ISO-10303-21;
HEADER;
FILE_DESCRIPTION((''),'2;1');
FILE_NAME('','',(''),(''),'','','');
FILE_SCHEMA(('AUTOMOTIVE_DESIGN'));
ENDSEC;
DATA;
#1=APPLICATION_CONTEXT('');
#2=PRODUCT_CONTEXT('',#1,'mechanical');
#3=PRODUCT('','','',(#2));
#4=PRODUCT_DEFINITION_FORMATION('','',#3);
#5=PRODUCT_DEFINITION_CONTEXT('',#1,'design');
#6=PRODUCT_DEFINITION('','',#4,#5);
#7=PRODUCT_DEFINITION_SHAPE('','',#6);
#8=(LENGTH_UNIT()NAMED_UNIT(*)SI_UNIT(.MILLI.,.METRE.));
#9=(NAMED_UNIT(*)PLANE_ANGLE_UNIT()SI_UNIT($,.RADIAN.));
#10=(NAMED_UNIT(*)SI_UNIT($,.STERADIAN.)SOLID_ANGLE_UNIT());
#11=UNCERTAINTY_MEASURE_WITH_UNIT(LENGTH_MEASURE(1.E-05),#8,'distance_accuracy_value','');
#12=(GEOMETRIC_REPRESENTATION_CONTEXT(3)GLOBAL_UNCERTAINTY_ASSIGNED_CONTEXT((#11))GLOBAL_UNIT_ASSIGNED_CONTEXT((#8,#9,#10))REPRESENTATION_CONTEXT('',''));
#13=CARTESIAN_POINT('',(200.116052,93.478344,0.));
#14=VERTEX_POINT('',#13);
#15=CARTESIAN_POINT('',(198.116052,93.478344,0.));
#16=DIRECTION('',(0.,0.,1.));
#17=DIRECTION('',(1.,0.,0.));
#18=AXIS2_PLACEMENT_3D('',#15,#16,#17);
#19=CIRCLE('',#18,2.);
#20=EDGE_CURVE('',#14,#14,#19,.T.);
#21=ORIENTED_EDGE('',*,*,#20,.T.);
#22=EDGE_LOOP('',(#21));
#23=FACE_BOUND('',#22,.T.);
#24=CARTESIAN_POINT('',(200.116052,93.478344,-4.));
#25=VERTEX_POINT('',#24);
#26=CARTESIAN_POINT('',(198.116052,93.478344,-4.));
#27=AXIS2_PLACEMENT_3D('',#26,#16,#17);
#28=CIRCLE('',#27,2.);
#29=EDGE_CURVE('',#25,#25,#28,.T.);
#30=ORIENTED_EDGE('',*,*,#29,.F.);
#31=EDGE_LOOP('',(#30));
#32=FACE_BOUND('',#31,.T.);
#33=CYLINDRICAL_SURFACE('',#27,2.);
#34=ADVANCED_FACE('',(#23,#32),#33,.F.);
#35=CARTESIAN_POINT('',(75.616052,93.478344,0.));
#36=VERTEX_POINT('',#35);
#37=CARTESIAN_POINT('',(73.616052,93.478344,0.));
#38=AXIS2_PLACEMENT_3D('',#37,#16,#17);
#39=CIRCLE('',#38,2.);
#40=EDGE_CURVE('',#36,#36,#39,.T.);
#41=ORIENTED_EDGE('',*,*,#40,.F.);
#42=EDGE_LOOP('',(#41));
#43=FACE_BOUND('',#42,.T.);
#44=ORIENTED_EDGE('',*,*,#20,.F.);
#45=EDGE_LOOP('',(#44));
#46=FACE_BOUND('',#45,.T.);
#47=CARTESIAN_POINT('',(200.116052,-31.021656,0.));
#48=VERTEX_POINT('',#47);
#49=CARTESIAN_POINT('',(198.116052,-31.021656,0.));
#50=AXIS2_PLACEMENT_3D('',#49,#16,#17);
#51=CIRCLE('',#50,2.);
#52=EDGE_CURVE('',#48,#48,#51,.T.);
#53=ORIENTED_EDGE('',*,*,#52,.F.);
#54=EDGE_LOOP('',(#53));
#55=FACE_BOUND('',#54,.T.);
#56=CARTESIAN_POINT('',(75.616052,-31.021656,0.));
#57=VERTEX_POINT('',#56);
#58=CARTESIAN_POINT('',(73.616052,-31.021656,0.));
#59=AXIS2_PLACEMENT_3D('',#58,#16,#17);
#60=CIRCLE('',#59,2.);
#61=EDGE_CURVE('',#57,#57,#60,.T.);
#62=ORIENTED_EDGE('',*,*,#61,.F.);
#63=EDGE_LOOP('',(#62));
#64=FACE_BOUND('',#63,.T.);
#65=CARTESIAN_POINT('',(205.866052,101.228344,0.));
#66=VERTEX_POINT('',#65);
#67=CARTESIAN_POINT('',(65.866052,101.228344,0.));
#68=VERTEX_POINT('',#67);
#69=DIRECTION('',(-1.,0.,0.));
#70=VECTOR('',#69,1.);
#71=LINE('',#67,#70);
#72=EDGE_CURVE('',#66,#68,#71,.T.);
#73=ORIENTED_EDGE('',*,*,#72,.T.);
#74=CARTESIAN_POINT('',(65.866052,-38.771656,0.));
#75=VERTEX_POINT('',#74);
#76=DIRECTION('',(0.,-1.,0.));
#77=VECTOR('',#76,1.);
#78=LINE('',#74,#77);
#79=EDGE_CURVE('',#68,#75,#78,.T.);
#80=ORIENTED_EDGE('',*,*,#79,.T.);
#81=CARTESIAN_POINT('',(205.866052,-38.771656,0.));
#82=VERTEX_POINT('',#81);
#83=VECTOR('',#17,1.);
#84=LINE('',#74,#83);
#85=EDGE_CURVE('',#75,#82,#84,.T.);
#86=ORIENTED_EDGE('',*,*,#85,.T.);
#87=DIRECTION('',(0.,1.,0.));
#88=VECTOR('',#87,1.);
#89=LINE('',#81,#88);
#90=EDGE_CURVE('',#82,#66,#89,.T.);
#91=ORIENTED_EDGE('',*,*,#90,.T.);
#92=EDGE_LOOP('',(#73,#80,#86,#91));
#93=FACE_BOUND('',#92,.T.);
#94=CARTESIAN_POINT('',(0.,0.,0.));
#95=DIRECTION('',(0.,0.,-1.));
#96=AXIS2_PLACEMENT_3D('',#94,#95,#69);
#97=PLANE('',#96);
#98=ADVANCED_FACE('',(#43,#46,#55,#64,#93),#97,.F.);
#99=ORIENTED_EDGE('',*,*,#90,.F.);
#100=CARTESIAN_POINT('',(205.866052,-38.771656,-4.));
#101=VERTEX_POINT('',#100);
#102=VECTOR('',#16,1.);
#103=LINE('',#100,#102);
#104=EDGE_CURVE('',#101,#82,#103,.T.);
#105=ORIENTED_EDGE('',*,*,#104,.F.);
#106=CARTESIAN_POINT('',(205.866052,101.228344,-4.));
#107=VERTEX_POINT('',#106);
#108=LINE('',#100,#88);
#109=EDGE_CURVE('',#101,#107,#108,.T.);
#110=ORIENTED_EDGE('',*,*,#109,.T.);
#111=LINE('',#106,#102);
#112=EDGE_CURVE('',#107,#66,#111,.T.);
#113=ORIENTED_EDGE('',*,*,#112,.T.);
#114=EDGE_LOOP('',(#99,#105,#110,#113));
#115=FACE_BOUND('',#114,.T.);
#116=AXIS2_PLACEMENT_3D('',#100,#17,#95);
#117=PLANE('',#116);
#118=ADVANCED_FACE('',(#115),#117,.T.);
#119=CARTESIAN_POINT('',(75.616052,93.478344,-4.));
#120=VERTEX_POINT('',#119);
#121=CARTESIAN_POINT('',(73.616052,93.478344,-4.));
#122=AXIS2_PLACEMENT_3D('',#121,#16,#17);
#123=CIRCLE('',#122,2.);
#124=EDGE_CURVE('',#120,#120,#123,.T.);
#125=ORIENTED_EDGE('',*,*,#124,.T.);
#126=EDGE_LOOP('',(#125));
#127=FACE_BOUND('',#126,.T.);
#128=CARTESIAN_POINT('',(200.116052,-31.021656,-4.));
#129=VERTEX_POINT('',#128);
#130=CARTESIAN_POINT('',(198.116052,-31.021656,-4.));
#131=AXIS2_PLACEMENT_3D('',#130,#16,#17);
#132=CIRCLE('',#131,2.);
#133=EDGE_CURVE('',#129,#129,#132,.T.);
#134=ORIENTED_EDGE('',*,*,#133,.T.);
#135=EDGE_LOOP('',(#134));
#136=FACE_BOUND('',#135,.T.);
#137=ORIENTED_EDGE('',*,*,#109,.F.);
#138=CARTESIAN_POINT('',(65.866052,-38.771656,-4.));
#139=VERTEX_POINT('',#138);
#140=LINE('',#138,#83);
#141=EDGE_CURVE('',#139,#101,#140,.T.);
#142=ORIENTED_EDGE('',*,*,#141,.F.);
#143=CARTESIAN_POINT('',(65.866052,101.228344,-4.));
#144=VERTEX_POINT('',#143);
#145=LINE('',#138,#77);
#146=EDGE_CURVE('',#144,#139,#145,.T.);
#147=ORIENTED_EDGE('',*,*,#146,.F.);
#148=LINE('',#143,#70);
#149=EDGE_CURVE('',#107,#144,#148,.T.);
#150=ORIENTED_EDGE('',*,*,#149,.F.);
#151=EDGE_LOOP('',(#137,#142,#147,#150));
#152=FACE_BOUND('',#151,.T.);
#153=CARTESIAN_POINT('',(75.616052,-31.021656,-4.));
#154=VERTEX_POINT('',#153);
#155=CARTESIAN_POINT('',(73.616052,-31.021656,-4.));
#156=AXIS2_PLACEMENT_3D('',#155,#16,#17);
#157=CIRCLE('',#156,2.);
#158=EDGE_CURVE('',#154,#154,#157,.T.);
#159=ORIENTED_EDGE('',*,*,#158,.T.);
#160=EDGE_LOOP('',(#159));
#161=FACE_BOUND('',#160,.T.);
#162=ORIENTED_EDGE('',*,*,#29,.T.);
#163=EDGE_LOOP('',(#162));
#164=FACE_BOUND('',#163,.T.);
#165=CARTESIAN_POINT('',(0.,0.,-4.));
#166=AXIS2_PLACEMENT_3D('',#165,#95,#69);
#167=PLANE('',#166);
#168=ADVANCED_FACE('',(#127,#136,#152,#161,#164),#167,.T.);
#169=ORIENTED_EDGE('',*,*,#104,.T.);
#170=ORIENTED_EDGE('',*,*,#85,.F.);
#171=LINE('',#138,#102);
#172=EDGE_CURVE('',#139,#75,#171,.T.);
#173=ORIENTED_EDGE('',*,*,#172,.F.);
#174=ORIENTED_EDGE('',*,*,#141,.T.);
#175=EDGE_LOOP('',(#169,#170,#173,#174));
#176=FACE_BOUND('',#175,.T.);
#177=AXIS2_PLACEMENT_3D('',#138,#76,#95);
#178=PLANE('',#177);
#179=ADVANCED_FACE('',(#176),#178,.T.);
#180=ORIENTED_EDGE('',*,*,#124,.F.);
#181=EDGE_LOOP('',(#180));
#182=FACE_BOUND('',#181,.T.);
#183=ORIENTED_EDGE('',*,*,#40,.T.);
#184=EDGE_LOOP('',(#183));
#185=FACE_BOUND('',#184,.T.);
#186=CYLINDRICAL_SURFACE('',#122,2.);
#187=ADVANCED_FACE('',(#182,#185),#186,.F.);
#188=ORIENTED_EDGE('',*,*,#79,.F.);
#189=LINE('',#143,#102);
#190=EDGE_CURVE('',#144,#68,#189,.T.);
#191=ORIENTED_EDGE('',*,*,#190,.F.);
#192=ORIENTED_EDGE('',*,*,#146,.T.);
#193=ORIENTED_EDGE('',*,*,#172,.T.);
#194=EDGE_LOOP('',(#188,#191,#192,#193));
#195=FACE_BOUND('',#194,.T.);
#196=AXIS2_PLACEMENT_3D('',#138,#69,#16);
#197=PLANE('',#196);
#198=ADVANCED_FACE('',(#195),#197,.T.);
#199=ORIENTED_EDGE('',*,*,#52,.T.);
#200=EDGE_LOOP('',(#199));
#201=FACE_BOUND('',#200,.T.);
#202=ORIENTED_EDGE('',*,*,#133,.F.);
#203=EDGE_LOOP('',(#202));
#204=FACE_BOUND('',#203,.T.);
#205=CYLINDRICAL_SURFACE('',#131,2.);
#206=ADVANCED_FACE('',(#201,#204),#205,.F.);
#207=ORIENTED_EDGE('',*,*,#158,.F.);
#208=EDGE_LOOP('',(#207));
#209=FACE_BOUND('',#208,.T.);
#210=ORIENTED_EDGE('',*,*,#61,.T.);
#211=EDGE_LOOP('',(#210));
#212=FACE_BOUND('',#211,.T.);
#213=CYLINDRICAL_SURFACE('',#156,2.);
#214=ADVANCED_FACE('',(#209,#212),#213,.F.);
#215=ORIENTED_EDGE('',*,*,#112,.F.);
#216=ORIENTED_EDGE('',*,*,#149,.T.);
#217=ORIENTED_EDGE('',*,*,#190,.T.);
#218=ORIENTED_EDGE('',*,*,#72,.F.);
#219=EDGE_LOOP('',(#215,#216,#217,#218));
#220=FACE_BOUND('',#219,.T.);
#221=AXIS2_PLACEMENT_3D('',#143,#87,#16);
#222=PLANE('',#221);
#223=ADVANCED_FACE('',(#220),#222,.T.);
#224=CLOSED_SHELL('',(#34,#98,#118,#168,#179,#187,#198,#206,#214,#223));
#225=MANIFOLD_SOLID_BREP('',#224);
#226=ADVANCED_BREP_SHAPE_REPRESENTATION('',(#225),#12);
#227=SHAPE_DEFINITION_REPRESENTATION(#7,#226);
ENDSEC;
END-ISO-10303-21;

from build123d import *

# Parameters (mm, degrees)
SKETCH2_W          = 140
SKETCH2_H          = 140
SKETCH2_R          = 2
BASE_FLANGE2_DEPTH = 4


# Sheet-metal steps are written as plain solids
with BuildPart() as part:
    # Sketch2 → Base-Flange2 (new body)
    with BuildSketch(Plane.XY):
        with Locations((135.866052122, 31.228344263)):
            Rectangle(SKETCH2_W, SKETCH2_H)
        with Locations((73.616052122, 93.478344263)):
            Circle(SKETCH2_R, mode=Mode.SUBTRACT)
        with Locations((198.116052122, 93.478344263)):
            Circle(SKETCH2_R, mode=Mode.SUBTRACT)
        with Locations((198.116052122, -31.021655737)):
            Circle(SKETCH2_R, mode=Mode.SUBTRACT)
        with Locations((73.616052122, -31.021655737)):
            Circle(SKETCH2_R, mode=Mode.SUBTRACT)
    extrude(amount=-BASE_FLANGE2_DEPTH)


solid = part.part
